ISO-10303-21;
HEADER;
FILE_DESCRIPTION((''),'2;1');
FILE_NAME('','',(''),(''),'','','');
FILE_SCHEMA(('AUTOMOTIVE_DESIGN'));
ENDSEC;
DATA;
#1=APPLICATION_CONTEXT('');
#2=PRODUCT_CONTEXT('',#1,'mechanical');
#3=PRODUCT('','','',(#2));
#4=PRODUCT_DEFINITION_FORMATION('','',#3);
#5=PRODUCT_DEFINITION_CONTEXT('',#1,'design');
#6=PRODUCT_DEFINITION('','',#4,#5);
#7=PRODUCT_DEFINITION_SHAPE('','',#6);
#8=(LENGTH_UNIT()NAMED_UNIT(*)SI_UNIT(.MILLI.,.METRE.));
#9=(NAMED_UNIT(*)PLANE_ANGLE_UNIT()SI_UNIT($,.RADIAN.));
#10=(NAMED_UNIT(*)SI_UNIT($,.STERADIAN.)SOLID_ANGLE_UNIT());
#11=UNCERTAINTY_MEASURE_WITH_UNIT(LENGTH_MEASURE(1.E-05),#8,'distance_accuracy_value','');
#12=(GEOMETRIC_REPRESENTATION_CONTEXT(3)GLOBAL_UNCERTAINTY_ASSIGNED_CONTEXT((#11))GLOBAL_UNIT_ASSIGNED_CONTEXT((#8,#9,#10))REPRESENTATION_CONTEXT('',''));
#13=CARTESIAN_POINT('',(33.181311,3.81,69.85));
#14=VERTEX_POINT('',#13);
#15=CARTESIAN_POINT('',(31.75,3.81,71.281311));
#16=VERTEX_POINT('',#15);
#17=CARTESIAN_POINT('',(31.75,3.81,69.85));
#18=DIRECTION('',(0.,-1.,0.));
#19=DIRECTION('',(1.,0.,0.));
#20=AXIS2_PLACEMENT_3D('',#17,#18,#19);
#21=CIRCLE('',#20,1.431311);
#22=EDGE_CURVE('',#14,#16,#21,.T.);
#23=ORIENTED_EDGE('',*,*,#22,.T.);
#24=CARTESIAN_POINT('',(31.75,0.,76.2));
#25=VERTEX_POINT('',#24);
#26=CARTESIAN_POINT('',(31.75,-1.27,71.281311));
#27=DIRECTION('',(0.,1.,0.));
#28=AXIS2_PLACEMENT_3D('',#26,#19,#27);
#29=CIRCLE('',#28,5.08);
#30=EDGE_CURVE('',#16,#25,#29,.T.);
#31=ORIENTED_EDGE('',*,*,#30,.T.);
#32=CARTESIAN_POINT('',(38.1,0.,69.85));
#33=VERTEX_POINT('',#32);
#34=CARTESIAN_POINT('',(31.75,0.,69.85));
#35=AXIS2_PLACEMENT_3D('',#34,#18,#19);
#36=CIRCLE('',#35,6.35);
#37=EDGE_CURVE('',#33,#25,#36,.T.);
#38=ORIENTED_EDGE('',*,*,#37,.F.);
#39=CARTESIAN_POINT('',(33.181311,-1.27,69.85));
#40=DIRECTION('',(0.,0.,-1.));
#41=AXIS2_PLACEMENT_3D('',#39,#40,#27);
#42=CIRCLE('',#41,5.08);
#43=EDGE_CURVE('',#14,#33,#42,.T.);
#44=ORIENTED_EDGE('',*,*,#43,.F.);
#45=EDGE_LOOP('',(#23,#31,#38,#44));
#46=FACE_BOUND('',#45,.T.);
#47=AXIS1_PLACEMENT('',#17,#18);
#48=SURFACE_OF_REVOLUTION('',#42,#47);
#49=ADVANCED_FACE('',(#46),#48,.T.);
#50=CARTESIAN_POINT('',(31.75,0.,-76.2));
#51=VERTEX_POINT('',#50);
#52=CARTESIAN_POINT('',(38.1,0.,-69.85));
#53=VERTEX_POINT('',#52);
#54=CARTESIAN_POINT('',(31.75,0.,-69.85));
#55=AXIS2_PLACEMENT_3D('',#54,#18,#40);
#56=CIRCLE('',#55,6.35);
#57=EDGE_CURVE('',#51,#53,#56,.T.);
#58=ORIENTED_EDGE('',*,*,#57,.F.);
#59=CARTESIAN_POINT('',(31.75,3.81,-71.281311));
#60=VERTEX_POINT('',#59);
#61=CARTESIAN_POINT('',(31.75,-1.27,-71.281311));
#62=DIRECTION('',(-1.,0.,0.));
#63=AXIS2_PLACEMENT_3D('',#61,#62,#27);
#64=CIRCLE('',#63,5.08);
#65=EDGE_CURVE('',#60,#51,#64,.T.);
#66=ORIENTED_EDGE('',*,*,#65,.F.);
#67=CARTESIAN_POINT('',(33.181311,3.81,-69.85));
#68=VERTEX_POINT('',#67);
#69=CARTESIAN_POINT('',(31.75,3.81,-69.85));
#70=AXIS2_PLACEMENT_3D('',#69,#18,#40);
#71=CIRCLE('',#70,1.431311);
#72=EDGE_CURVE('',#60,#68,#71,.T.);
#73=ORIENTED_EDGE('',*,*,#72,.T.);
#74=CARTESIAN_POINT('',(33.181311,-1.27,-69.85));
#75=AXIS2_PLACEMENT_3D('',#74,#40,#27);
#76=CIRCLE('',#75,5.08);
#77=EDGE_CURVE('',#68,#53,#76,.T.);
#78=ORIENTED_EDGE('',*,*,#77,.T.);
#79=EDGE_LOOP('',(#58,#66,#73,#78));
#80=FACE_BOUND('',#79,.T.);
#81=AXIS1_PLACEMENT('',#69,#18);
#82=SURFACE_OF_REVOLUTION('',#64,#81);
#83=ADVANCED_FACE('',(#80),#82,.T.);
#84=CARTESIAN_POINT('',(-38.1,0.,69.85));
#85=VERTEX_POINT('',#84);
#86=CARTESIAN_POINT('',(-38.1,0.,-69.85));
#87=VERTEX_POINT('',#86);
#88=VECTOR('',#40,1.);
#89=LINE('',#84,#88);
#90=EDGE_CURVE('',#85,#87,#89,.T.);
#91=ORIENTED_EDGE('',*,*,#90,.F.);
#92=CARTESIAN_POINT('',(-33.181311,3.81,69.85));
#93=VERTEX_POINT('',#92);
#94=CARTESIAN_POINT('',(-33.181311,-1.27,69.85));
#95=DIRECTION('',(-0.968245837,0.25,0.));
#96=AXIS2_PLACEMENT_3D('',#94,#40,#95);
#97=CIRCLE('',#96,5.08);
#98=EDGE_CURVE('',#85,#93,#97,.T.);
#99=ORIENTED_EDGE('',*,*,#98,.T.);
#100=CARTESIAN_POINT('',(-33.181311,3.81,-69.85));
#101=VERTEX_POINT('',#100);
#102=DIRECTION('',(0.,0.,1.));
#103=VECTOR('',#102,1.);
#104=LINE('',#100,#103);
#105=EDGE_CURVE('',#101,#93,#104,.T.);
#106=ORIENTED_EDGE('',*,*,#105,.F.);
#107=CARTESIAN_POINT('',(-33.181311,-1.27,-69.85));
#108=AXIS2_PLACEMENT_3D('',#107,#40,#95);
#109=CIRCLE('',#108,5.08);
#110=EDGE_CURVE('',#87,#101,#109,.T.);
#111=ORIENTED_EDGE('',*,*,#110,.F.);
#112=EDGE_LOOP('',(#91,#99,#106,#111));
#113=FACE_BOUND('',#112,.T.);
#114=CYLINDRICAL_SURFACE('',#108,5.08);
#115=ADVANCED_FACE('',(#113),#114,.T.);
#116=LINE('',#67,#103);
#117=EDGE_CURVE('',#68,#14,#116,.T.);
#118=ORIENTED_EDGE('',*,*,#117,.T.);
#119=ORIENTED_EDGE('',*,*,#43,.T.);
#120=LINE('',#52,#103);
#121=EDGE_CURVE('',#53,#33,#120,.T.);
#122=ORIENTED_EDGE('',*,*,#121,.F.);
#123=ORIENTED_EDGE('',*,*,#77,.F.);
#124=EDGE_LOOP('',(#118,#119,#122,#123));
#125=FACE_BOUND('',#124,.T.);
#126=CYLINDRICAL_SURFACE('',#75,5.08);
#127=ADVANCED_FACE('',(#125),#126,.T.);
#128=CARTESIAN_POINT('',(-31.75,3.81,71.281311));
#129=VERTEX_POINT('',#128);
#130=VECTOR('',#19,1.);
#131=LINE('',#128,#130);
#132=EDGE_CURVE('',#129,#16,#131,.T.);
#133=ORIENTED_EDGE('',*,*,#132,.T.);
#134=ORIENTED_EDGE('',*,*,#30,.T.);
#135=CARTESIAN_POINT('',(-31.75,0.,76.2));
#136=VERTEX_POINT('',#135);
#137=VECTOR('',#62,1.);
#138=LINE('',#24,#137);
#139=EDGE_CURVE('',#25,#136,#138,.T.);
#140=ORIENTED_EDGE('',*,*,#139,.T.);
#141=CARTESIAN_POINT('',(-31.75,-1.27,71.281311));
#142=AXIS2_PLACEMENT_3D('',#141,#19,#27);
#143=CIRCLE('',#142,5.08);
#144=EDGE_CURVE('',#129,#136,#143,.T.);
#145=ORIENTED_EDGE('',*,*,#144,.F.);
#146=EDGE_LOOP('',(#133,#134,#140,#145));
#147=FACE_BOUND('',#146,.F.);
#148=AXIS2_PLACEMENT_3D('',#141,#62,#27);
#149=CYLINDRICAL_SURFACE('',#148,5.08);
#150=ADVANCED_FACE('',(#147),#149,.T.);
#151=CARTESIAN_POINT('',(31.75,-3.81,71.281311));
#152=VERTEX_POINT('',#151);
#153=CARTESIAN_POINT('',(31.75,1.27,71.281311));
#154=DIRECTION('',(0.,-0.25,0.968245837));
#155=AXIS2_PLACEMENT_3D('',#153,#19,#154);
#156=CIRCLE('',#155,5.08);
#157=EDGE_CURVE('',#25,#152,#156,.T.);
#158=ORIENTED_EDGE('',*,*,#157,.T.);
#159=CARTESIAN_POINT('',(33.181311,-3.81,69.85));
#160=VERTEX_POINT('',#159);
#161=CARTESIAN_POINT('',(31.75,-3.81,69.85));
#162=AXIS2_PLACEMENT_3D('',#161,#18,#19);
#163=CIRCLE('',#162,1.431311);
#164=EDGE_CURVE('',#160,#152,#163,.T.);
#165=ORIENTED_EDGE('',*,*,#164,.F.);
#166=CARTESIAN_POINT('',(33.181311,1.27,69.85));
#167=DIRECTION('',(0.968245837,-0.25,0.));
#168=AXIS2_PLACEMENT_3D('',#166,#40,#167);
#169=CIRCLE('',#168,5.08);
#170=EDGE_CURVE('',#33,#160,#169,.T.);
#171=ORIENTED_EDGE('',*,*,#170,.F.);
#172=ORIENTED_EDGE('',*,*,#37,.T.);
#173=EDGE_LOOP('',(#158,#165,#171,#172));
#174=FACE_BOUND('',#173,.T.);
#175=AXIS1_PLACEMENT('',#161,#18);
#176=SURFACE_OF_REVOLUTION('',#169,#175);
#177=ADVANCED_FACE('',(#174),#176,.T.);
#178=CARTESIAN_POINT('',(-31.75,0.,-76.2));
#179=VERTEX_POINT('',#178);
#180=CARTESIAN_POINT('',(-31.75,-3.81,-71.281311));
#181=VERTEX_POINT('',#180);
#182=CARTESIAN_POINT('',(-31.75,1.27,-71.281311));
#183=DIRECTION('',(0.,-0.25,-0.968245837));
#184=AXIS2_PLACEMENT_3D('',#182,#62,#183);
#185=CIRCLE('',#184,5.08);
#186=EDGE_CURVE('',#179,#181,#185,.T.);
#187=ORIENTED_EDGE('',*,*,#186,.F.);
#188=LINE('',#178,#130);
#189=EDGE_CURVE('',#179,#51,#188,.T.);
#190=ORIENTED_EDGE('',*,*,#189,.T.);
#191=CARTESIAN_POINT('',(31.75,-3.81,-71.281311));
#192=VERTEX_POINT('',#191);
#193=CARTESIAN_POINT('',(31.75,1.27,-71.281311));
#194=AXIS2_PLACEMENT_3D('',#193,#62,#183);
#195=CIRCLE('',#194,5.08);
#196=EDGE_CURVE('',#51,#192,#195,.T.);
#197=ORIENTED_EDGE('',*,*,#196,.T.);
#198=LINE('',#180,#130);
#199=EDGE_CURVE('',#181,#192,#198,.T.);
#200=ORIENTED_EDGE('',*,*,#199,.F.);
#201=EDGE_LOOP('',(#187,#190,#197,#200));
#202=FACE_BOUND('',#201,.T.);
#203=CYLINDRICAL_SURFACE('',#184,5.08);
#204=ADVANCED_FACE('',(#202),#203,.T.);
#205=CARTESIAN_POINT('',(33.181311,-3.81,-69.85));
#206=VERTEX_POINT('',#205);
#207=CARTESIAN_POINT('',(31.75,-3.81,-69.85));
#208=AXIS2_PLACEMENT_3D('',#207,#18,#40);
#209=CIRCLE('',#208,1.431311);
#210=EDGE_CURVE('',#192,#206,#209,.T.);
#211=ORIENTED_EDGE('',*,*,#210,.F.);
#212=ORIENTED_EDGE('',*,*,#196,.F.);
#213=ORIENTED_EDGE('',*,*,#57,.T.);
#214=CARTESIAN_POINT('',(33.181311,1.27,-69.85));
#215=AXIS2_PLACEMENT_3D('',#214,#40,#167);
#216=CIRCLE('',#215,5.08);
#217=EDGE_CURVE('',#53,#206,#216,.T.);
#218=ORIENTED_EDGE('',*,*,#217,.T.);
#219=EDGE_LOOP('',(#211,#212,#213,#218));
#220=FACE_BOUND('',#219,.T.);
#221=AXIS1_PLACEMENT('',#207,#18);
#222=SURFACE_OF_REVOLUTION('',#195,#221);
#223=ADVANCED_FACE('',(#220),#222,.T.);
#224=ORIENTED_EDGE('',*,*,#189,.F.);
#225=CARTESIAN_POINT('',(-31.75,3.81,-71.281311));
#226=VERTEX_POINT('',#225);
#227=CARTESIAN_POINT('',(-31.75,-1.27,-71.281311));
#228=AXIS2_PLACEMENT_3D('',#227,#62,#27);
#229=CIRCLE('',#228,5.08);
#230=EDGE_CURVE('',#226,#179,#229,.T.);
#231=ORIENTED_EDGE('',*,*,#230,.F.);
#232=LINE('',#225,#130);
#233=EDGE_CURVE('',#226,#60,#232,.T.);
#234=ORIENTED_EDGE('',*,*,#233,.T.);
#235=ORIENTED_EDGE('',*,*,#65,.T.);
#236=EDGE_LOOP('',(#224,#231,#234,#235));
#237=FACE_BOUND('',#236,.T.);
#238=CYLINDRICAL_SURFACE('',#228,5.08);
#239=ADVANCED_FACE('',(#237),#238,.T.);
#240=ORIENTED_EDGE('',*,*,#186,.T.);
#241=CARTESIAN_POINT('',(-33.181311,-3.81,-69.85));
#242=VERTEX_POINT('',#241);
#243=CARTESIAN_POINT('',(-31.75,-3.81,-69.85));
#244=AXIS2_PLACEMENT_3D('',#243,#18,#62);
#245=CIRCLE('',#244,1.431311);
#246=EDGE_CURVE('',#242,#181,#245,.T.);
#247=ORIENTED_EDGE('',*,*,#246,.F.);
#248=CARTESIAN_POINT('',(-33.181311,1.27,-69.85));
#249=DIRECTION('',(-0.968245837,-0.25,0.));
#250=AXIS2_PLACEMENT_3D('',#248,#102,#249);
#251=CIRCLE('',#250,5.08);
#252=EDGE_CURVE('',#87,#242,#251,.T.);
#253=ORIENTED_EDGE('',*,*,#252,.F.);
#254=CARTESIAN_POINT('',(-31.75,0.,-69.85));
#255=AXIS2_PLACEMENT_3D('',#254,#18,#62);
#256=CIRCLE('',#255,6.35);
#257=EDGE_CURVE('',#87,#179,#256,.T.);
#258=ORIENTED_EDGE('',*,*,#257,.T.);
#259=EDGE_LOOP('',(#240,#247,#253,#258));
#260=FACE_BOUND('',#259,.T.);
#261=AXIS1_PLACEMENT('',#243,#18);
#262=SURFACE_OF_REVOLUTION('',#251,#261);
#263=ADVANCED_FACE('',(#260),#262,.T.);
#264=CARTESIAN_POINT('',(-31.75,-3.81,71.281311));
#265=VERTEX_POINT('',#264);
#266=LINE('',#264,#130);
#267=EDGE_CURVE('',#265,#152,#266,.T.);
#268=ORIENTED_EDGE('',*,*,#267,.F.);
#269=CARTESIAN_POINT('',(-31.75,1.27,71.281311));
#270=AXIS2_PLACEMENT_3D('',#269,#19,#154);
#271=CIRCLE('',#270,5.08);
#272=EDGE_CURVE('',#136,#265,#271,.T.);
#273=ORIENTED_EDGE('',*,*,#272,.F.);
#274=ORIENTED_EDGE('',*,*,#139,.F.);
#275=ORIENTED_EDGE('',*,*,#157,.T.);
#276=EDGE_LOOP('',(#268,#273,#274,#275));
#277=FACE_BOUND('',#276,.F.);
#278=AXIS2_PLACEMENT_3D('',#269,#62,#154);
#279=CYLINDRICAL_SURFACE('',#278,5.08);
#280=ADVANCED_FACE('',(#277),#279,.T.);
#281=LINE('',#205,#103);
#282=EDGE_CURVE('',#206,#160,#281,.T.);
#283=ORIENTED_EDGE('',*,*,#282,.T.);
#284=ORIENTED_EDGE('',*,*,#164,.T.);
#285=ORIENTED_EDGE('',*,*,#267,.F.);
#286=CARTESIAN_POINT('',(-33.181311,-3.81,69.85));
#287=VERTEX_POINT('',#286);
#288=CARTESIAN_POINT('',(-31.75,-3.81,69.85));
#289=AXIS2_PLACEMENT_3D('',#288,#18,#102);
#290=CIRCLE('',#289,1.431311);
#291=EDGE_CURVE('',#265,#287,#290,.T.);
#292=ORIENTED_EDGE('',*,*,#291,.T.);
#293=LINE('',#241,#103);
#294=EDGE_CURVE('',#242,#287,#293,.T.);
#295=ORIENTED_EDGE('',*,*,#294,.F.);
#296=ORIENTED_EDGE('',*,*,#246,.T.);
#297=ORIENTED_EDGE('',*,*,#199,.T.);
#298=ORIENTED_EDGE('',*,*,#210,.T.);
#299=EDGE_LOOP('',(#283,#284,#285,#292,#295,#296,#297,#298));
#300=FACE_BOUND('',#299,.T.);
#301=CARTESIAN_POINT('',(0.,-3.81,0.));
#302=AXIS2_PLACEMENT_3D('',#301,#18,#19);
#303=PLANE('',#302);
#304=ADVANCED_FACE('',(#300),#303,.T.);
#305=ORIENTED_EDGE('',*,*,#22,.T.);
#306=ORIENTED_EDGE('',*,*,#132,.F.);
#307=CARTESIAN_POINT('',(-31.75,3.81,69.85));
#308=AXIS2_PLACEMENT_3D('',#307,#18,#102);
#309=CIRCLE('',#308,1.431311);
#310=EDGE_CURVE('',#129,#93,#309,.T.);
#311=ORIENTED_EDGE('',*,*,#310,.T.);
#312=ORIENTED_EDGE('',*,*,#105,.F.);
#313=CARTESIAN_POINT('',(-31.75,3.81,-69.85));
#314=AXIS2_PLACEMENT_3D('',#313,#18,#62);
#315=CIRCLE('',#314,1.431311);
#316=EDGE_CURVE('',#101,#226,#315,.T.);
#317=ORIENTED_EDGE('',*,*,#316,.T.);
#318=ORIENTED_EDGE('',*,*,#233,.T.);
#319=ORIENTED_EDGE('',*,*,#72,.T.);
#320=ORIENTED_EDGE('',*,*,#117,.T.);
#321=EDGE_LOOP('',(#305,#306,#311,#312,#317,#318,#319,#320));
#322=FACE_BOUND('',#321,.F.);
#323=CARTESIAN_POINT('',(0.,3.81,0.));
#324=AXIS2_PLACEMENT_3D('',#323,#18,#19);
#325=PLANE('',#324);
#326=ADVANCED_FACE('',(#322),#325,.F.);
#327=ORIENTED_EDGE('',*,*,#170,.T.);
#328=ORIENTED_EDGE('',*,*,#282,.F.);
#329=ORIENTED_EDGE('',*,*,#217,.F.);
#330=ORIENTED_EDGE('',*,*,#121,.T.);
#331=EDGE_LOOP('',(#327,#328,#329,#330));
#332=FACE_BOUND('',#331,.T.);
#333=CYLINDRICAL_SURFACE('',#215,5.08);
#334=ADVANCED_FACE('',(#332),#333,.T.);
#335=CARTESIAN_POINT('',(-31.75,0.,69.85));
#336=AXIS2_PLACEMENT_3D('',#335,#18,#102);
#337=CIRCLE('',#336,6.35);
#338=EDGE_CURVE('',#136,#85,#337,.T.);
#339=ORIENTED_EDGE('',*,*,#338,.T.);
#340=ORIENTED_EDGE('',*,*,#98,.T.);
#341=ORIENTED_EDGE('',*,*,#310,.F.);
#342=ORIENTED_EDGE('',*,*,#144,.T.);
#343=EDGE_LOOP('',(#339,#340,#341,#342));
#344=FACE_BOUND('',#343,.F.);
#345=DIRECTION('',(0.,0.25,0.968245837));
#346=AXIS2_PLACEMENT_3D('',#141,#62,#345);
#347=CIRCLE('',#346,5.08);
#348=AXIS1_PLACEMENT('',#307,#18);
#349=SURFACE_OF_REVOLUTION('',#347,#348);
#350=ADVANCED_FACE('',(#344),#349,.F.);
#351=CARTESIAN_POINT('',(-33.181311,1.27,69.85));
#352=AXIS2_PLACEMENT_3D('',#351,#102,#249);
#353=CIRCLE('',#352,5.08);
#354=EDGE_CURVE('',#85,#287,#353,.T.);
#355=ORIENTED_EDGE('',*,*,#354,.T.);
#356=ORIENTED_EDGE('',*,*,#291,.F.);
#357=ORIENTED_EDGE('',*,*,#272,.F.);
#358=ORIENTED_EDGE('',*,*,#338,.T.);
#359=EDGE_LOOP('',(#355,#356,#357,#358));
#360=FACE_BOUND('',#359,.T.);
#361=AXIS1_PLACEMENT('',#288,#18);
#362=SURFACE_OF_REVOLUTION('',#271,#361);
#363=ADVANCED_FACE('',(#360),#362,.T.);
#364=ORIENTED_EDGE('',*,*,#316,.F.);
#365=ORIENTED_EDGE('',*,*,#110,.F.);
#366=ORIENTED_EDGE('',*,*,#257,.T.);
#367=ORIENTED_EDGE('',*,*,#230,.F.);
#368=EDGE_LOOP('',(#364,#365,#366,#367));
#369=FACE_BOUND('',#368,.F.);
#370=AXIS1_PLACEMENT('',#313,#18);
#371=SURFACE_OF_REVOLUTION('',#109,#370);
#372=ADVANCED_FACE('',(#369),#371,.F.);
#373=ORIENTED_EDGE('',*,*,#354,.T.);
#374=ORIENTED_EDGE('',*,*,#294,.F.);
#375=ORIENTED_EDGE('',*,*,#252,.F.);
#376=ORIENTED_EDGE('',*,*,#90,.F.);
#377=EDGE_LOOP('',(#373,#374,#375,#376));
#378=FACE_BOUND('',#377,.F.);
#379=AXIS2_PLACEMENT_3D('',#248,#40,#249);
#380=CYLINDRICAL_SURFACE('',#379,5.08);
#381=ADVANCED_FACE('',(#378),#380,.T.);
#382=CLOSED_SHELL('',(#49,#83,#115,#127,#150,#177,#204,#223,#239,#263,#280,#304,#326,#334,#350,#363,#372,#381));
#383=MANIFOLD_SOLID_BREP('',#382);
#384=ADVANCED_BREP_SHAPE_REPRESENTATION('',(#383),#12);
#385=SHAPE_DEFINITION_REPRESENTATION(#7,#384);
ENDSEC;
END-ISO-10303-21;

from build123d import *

# Parameters (mm, degrees)
F1_DEPTH     = 3.81
F2_T1_DEPTH  = 139.7
F2_T3_DEPTH  = 63.5
F2_T6_ANGLE  = 90
F2_T8_ANGLE  = 90
F2_T10_ANGLE = 90
F2_T12_ANGLE = 90
F3_DEPTH     = 3.81
F4_T1_DEPTH  = 139.7
F4_T3_DEPTH  = 63.5
F4_T6_ANGLE  = 90
F4_T8_ANGLE  = 90
F4_T10_ANGLE = 90
F4_T12_ANGLE = 90


# Not quite as in the source:
# - a fillet or chamfer that OpenCascade refuses, or shapes differently, is made with other operations: its cross-section is extruded or revolved along the edge and cut away or added
# - the program builds the solid bodies; features that only make, move or delete a surface that nothing else refers to are left out


with BuildPart() as f1:
    # F0 (on Front) → F1 (new body)
    with BuildSketch(Plane.XZ):
        with BuildLine():
            Line((-31.75, -76.2), (31.75, -76.2))
            ThreePointArc((31.75, -76.2), (36.2401280605, -74.3401280605), (38.1, -69.85))
            Line((38.1, -69.85), (38.1, 69.85))
            ThreePointArc((38.1, 69.85), (36.2401280605, 74.3401280605), (31.75, 76.2))
            Line((31.75, 76.2), (-31.75, 76.2))
            ThreePointArc((-31.75, 76.2), (-36.2401280605, 74.3401280605), (-38.1, 69.85))
            Line((-38.1, 69.85), (-38.1, -69.85))
            ThreePointArc((-38.1, -69.85), (-36.2401280605, -74.3401280605), (-31.75, -76.2))
        make_face()
    extrude(amount=F1_DEPTH)

    # F2: fillet of radius 5.08 on 1 edges, made by hand

    # F2_s2 → F2_t1 (cut)
    with BuildSketch(Plane.XY.offset(-69.85)):
        with BuildLine():
            ThreePointArc((38.1, 0), (36.2921631237, -2.7460926284), (33.1813111503, -3.81))
            Line((33.1813111503, -3.81), (38.1, -3.81))
            Line((38.1, -3.81), (38.1, 0))
        make_face()
        with BuildLine():
            ThreePointArc((-38.1, 0), (-36.2921631237, -2.7460926284), (-33.1813111503, -3.81))
            Line((-33.1813111503, -3.81), (-38.1, -3.81))
            Line((-38.1, -3.81), (-38.1, 0))
        make_face()
    extrude(amount=F2_T1_DEPTH, mode=Mode.SUBTRACT)

    # F2_s4 → F2_t3 (cut)
    with BuildSketch(Plane.YZ.offset(-31.75)):
        with BuildLine():
            ThreePointArc((0, 76.2), (-2.7460926284, 74.3921631237), (-3.81, 71.2813111503))
            Line((-3.81, 71.2813111503), (-3.81, 76.2))
            Line((-3.81, 76.2), (0, 76.2))
        make_face()
        with BuildLine():
            ThreePointArc((0, -76.2), (-2.7460926284, -74.3921631237), (-3.81, -71.2813111503))
            Line((-3.81, -71.2813111503), (-3.81, -76.2))
            Line((-3.81, -76.2), (0, -76.2))
        make_face()
    extrude(amount=F2_T3_DEPTH, mode=Mode.SUBTRACT)

    # F2_s5 → F2_t6 (revolve, cut)
    with BuildSketch(Plane.YZ.offset(31.75)):
        with BuildLine():
            ThreePointArc((0, -76.2), (-2.7460926284, -74.3921631237), (-3.81, -71.2813111503))
            Line((-3.81, -71.2813111503), (-3.81, -76.2))
            Line((-3.81, -76.2), (0, -76.2))
        make_face()
    revolve(axis=Axis((31.75, -3.81, -69.85), (0, -1, 0)), revolution_arc=F2_T6_ANGLE, mode=Mode.SUBTRACT)

    # F2_s7 → F2_t8 (revolve, cut)
    with BuildSketch(Plane.XY.offset(69.85)):
        with BuildLine():
            ThreePointArc((38.1, 0), (36.2921631237, -2.7460926284), (33.1813111503, -3.81))
            Line((33.1813111503, -3.81), (38.1, -3.81))
            Line((38.1, -3.81), (38.1, 0))
        make_face()
    revolve(axis=Axis((31.75, -3.81, 69.85), (0, -1, 0)), revolution_arc=F2_T8_ANGLE, mode=Mode.SUBTRACT)

    # F2_s9 → F2_t10 (revolve, cut)
    with BuildSketch(Plane.YZ.offset(-31.75)):
        with BuildLine():
            ThreePointArc((0, 76.2), (-2.7460926284, 74.3921631237), (-3.81, 71.2813111503))
            Line((-3.81, 71.2813111503), (-3.81, 76.2))
            Line((-3.81, 76.2), (0, 76.2))
        make_face()
    revolve(axis=Axis((-31.75, -3.81, 69.85), (0, -1, 0)), revolution_arc=F2_T10_ANGLE, mode=Mode.SUBTRACT)

    # F2_s11 → F2_t12 (revolve, cut)
    with BuildSketch(Plane.XY.offset(-69.85)):
        with BuildLine():
            ThreePointArc((-38.1, 0), (-36.2921631237, -2.7460926284), (-33.1813111503, -3.81))
            Line((-33.1813111503, -3.81), (-38.1, -3.81))
            Line((-38.1, -3.81), (-38.1, 0))
        make_face()
    revolve(axis=Axis((-31.75, -3.81, -69.85), (0, -1, 0)), revolution_arc=F2_T12_ANGLE, mode=Mode.SUBTRACT)

    # F3 (add): a face of the model
    f3_faces = [f1.faces().sort_by_distance(p)[0] for p in [
        (0, 0, 0),
    ]]
    extrude(f3_faces, amount=F3_DEPTH)

    # F4: fillet of radius 5.08 on 1 edges, made by hand

    # F4_s2 → F4_t1 (cut)
    with BuildSketch(Plane.XY.offset(-69.85)):
        with BuildLine():
            ThreePointArc((33.1813111503, 3.81), (36.2921631237, 2.7460926284), (38.1, 0))
            Line((38.1, 0), (38.1, 3.81))
            Line((38.1, 3.81), (33.1813111503, 3.81))
        make_face()
        with BuildLine():
            ThreePointArc((-38.1, 0), (-36.2921631237, 2.7460926284), (-33.1813111503, 3.81))
            Line((-33.1813111503, 3.81), (-38.1, 3.81))
            Line((-38.1, 3.81), (-38.1, 0))
        make_face()
    extrude(amount=F4_T1_DEPTH, mode=Mode.SUBTRACT)

    # F4_s4 → F4_t3 (cut)
    with BuildSketch(Plane.YZ.offset(-31.75)):
        with BuildLine():
            ThreePointArc((3.81, 71.2813111503), (2.7460926284, 74.3921631237), (0, 76.2))
            Line((0, 76.2), (3.81, 76.2))
            Line((3.81, 76.2), (3.81, 71.2813111503))
        make_face()
        with BuildLine():
            ThreePointArc((3.81, -71.2813111503), (2.7460926284, -74.3921631237), (0, -76.2))
            Line((0, -76.2), (3.81, -76.2))
            Line((3.81, -76.2), (3.81, -71.2813111503))
        make_face()
    extrude(amount=F4_T3_DEPTH, mode=Mode.SUBTRACT)

    # F4_s5 → F4_t6 (revolve, cut)
    with BuildSketch(Plane.YZ.offset(31.75)):
        with BuildLine():
            ThreePointArc((3.81, -71.2813111503), (2.7460926284, -74.3921631237), (0, -76.2))
            Line((0, -76.2), (3.81, -76.2))
            Line((3.81, -76.2), (3.81, -71.2813111503))
        make_face()
    revolve(axis=Axis((31.75, 3.81, -69.85), (0, -1, 0)), revolution_arc=F4_T6_ANGLE, mode=Mode.SUBTRACT)

    # F4_s7 → F4_t8 (revolve, cut)
    with BuildSketch(Plane.XY.offset(69.85)):
        with BuildLine():
            ThreePointArc((33.1813111503, 3.81), (36.2921631237, 2.7460926284), (38.1, 0))
            Line((38.1, 0), (38.1, 3.81))
            Line((38.1, 3.81), (33.1813111503, 3.81))
        make_face()
    revolve(axis=Axis((31.75, 3.81, 69.85), (0, -1, 0)), revolution_arc=F4_T8_ANGLE, mode=Mode.SUBTRACT)

    # F4_s9 → F4_t10 (revolve, cut)
    with BuildSketch(Plane.YZ.offset(-31.75)):
        with BuildLine():
            ThreePointArc((0, 76.2), (2.7460926284, 74.3921631237), (3.81, 71.2813111503))
            Line((3.81, 71.2813111503), (3.81, 76.2))
            Line((3.81, 76.2), (0, 76.2))
        make_face()
    revolve(axis=Axis((-31.75, 3.81, 69.85), (0, -1, 0)), revolution_arc=F4_T10_ANGLE, mode=Mode.SUBTRACT)

    # F4_s11 → F4_t12 (revolve, cut)
    with BuildSketch(Plane.XY.offset(-69.85)):
        with BuildLine():
            ThreePointArc((-38.1, 0), (-36.2921631237, 2.7460926284), (-33.1813111503, 3.81))
            Line((-33.1813111503, 3.81), (-38.1, 3.81))
            Line((-38.1, 3.81), (-38.1, 0))
        make_face()
    revolve(axis=Axis((-31.75, 3.81, -69.85), (0, -1, 0)), revolution_arc=F4_T12_ANGLE, mode=Mode.SUBTRACT)


solid = f1.part
